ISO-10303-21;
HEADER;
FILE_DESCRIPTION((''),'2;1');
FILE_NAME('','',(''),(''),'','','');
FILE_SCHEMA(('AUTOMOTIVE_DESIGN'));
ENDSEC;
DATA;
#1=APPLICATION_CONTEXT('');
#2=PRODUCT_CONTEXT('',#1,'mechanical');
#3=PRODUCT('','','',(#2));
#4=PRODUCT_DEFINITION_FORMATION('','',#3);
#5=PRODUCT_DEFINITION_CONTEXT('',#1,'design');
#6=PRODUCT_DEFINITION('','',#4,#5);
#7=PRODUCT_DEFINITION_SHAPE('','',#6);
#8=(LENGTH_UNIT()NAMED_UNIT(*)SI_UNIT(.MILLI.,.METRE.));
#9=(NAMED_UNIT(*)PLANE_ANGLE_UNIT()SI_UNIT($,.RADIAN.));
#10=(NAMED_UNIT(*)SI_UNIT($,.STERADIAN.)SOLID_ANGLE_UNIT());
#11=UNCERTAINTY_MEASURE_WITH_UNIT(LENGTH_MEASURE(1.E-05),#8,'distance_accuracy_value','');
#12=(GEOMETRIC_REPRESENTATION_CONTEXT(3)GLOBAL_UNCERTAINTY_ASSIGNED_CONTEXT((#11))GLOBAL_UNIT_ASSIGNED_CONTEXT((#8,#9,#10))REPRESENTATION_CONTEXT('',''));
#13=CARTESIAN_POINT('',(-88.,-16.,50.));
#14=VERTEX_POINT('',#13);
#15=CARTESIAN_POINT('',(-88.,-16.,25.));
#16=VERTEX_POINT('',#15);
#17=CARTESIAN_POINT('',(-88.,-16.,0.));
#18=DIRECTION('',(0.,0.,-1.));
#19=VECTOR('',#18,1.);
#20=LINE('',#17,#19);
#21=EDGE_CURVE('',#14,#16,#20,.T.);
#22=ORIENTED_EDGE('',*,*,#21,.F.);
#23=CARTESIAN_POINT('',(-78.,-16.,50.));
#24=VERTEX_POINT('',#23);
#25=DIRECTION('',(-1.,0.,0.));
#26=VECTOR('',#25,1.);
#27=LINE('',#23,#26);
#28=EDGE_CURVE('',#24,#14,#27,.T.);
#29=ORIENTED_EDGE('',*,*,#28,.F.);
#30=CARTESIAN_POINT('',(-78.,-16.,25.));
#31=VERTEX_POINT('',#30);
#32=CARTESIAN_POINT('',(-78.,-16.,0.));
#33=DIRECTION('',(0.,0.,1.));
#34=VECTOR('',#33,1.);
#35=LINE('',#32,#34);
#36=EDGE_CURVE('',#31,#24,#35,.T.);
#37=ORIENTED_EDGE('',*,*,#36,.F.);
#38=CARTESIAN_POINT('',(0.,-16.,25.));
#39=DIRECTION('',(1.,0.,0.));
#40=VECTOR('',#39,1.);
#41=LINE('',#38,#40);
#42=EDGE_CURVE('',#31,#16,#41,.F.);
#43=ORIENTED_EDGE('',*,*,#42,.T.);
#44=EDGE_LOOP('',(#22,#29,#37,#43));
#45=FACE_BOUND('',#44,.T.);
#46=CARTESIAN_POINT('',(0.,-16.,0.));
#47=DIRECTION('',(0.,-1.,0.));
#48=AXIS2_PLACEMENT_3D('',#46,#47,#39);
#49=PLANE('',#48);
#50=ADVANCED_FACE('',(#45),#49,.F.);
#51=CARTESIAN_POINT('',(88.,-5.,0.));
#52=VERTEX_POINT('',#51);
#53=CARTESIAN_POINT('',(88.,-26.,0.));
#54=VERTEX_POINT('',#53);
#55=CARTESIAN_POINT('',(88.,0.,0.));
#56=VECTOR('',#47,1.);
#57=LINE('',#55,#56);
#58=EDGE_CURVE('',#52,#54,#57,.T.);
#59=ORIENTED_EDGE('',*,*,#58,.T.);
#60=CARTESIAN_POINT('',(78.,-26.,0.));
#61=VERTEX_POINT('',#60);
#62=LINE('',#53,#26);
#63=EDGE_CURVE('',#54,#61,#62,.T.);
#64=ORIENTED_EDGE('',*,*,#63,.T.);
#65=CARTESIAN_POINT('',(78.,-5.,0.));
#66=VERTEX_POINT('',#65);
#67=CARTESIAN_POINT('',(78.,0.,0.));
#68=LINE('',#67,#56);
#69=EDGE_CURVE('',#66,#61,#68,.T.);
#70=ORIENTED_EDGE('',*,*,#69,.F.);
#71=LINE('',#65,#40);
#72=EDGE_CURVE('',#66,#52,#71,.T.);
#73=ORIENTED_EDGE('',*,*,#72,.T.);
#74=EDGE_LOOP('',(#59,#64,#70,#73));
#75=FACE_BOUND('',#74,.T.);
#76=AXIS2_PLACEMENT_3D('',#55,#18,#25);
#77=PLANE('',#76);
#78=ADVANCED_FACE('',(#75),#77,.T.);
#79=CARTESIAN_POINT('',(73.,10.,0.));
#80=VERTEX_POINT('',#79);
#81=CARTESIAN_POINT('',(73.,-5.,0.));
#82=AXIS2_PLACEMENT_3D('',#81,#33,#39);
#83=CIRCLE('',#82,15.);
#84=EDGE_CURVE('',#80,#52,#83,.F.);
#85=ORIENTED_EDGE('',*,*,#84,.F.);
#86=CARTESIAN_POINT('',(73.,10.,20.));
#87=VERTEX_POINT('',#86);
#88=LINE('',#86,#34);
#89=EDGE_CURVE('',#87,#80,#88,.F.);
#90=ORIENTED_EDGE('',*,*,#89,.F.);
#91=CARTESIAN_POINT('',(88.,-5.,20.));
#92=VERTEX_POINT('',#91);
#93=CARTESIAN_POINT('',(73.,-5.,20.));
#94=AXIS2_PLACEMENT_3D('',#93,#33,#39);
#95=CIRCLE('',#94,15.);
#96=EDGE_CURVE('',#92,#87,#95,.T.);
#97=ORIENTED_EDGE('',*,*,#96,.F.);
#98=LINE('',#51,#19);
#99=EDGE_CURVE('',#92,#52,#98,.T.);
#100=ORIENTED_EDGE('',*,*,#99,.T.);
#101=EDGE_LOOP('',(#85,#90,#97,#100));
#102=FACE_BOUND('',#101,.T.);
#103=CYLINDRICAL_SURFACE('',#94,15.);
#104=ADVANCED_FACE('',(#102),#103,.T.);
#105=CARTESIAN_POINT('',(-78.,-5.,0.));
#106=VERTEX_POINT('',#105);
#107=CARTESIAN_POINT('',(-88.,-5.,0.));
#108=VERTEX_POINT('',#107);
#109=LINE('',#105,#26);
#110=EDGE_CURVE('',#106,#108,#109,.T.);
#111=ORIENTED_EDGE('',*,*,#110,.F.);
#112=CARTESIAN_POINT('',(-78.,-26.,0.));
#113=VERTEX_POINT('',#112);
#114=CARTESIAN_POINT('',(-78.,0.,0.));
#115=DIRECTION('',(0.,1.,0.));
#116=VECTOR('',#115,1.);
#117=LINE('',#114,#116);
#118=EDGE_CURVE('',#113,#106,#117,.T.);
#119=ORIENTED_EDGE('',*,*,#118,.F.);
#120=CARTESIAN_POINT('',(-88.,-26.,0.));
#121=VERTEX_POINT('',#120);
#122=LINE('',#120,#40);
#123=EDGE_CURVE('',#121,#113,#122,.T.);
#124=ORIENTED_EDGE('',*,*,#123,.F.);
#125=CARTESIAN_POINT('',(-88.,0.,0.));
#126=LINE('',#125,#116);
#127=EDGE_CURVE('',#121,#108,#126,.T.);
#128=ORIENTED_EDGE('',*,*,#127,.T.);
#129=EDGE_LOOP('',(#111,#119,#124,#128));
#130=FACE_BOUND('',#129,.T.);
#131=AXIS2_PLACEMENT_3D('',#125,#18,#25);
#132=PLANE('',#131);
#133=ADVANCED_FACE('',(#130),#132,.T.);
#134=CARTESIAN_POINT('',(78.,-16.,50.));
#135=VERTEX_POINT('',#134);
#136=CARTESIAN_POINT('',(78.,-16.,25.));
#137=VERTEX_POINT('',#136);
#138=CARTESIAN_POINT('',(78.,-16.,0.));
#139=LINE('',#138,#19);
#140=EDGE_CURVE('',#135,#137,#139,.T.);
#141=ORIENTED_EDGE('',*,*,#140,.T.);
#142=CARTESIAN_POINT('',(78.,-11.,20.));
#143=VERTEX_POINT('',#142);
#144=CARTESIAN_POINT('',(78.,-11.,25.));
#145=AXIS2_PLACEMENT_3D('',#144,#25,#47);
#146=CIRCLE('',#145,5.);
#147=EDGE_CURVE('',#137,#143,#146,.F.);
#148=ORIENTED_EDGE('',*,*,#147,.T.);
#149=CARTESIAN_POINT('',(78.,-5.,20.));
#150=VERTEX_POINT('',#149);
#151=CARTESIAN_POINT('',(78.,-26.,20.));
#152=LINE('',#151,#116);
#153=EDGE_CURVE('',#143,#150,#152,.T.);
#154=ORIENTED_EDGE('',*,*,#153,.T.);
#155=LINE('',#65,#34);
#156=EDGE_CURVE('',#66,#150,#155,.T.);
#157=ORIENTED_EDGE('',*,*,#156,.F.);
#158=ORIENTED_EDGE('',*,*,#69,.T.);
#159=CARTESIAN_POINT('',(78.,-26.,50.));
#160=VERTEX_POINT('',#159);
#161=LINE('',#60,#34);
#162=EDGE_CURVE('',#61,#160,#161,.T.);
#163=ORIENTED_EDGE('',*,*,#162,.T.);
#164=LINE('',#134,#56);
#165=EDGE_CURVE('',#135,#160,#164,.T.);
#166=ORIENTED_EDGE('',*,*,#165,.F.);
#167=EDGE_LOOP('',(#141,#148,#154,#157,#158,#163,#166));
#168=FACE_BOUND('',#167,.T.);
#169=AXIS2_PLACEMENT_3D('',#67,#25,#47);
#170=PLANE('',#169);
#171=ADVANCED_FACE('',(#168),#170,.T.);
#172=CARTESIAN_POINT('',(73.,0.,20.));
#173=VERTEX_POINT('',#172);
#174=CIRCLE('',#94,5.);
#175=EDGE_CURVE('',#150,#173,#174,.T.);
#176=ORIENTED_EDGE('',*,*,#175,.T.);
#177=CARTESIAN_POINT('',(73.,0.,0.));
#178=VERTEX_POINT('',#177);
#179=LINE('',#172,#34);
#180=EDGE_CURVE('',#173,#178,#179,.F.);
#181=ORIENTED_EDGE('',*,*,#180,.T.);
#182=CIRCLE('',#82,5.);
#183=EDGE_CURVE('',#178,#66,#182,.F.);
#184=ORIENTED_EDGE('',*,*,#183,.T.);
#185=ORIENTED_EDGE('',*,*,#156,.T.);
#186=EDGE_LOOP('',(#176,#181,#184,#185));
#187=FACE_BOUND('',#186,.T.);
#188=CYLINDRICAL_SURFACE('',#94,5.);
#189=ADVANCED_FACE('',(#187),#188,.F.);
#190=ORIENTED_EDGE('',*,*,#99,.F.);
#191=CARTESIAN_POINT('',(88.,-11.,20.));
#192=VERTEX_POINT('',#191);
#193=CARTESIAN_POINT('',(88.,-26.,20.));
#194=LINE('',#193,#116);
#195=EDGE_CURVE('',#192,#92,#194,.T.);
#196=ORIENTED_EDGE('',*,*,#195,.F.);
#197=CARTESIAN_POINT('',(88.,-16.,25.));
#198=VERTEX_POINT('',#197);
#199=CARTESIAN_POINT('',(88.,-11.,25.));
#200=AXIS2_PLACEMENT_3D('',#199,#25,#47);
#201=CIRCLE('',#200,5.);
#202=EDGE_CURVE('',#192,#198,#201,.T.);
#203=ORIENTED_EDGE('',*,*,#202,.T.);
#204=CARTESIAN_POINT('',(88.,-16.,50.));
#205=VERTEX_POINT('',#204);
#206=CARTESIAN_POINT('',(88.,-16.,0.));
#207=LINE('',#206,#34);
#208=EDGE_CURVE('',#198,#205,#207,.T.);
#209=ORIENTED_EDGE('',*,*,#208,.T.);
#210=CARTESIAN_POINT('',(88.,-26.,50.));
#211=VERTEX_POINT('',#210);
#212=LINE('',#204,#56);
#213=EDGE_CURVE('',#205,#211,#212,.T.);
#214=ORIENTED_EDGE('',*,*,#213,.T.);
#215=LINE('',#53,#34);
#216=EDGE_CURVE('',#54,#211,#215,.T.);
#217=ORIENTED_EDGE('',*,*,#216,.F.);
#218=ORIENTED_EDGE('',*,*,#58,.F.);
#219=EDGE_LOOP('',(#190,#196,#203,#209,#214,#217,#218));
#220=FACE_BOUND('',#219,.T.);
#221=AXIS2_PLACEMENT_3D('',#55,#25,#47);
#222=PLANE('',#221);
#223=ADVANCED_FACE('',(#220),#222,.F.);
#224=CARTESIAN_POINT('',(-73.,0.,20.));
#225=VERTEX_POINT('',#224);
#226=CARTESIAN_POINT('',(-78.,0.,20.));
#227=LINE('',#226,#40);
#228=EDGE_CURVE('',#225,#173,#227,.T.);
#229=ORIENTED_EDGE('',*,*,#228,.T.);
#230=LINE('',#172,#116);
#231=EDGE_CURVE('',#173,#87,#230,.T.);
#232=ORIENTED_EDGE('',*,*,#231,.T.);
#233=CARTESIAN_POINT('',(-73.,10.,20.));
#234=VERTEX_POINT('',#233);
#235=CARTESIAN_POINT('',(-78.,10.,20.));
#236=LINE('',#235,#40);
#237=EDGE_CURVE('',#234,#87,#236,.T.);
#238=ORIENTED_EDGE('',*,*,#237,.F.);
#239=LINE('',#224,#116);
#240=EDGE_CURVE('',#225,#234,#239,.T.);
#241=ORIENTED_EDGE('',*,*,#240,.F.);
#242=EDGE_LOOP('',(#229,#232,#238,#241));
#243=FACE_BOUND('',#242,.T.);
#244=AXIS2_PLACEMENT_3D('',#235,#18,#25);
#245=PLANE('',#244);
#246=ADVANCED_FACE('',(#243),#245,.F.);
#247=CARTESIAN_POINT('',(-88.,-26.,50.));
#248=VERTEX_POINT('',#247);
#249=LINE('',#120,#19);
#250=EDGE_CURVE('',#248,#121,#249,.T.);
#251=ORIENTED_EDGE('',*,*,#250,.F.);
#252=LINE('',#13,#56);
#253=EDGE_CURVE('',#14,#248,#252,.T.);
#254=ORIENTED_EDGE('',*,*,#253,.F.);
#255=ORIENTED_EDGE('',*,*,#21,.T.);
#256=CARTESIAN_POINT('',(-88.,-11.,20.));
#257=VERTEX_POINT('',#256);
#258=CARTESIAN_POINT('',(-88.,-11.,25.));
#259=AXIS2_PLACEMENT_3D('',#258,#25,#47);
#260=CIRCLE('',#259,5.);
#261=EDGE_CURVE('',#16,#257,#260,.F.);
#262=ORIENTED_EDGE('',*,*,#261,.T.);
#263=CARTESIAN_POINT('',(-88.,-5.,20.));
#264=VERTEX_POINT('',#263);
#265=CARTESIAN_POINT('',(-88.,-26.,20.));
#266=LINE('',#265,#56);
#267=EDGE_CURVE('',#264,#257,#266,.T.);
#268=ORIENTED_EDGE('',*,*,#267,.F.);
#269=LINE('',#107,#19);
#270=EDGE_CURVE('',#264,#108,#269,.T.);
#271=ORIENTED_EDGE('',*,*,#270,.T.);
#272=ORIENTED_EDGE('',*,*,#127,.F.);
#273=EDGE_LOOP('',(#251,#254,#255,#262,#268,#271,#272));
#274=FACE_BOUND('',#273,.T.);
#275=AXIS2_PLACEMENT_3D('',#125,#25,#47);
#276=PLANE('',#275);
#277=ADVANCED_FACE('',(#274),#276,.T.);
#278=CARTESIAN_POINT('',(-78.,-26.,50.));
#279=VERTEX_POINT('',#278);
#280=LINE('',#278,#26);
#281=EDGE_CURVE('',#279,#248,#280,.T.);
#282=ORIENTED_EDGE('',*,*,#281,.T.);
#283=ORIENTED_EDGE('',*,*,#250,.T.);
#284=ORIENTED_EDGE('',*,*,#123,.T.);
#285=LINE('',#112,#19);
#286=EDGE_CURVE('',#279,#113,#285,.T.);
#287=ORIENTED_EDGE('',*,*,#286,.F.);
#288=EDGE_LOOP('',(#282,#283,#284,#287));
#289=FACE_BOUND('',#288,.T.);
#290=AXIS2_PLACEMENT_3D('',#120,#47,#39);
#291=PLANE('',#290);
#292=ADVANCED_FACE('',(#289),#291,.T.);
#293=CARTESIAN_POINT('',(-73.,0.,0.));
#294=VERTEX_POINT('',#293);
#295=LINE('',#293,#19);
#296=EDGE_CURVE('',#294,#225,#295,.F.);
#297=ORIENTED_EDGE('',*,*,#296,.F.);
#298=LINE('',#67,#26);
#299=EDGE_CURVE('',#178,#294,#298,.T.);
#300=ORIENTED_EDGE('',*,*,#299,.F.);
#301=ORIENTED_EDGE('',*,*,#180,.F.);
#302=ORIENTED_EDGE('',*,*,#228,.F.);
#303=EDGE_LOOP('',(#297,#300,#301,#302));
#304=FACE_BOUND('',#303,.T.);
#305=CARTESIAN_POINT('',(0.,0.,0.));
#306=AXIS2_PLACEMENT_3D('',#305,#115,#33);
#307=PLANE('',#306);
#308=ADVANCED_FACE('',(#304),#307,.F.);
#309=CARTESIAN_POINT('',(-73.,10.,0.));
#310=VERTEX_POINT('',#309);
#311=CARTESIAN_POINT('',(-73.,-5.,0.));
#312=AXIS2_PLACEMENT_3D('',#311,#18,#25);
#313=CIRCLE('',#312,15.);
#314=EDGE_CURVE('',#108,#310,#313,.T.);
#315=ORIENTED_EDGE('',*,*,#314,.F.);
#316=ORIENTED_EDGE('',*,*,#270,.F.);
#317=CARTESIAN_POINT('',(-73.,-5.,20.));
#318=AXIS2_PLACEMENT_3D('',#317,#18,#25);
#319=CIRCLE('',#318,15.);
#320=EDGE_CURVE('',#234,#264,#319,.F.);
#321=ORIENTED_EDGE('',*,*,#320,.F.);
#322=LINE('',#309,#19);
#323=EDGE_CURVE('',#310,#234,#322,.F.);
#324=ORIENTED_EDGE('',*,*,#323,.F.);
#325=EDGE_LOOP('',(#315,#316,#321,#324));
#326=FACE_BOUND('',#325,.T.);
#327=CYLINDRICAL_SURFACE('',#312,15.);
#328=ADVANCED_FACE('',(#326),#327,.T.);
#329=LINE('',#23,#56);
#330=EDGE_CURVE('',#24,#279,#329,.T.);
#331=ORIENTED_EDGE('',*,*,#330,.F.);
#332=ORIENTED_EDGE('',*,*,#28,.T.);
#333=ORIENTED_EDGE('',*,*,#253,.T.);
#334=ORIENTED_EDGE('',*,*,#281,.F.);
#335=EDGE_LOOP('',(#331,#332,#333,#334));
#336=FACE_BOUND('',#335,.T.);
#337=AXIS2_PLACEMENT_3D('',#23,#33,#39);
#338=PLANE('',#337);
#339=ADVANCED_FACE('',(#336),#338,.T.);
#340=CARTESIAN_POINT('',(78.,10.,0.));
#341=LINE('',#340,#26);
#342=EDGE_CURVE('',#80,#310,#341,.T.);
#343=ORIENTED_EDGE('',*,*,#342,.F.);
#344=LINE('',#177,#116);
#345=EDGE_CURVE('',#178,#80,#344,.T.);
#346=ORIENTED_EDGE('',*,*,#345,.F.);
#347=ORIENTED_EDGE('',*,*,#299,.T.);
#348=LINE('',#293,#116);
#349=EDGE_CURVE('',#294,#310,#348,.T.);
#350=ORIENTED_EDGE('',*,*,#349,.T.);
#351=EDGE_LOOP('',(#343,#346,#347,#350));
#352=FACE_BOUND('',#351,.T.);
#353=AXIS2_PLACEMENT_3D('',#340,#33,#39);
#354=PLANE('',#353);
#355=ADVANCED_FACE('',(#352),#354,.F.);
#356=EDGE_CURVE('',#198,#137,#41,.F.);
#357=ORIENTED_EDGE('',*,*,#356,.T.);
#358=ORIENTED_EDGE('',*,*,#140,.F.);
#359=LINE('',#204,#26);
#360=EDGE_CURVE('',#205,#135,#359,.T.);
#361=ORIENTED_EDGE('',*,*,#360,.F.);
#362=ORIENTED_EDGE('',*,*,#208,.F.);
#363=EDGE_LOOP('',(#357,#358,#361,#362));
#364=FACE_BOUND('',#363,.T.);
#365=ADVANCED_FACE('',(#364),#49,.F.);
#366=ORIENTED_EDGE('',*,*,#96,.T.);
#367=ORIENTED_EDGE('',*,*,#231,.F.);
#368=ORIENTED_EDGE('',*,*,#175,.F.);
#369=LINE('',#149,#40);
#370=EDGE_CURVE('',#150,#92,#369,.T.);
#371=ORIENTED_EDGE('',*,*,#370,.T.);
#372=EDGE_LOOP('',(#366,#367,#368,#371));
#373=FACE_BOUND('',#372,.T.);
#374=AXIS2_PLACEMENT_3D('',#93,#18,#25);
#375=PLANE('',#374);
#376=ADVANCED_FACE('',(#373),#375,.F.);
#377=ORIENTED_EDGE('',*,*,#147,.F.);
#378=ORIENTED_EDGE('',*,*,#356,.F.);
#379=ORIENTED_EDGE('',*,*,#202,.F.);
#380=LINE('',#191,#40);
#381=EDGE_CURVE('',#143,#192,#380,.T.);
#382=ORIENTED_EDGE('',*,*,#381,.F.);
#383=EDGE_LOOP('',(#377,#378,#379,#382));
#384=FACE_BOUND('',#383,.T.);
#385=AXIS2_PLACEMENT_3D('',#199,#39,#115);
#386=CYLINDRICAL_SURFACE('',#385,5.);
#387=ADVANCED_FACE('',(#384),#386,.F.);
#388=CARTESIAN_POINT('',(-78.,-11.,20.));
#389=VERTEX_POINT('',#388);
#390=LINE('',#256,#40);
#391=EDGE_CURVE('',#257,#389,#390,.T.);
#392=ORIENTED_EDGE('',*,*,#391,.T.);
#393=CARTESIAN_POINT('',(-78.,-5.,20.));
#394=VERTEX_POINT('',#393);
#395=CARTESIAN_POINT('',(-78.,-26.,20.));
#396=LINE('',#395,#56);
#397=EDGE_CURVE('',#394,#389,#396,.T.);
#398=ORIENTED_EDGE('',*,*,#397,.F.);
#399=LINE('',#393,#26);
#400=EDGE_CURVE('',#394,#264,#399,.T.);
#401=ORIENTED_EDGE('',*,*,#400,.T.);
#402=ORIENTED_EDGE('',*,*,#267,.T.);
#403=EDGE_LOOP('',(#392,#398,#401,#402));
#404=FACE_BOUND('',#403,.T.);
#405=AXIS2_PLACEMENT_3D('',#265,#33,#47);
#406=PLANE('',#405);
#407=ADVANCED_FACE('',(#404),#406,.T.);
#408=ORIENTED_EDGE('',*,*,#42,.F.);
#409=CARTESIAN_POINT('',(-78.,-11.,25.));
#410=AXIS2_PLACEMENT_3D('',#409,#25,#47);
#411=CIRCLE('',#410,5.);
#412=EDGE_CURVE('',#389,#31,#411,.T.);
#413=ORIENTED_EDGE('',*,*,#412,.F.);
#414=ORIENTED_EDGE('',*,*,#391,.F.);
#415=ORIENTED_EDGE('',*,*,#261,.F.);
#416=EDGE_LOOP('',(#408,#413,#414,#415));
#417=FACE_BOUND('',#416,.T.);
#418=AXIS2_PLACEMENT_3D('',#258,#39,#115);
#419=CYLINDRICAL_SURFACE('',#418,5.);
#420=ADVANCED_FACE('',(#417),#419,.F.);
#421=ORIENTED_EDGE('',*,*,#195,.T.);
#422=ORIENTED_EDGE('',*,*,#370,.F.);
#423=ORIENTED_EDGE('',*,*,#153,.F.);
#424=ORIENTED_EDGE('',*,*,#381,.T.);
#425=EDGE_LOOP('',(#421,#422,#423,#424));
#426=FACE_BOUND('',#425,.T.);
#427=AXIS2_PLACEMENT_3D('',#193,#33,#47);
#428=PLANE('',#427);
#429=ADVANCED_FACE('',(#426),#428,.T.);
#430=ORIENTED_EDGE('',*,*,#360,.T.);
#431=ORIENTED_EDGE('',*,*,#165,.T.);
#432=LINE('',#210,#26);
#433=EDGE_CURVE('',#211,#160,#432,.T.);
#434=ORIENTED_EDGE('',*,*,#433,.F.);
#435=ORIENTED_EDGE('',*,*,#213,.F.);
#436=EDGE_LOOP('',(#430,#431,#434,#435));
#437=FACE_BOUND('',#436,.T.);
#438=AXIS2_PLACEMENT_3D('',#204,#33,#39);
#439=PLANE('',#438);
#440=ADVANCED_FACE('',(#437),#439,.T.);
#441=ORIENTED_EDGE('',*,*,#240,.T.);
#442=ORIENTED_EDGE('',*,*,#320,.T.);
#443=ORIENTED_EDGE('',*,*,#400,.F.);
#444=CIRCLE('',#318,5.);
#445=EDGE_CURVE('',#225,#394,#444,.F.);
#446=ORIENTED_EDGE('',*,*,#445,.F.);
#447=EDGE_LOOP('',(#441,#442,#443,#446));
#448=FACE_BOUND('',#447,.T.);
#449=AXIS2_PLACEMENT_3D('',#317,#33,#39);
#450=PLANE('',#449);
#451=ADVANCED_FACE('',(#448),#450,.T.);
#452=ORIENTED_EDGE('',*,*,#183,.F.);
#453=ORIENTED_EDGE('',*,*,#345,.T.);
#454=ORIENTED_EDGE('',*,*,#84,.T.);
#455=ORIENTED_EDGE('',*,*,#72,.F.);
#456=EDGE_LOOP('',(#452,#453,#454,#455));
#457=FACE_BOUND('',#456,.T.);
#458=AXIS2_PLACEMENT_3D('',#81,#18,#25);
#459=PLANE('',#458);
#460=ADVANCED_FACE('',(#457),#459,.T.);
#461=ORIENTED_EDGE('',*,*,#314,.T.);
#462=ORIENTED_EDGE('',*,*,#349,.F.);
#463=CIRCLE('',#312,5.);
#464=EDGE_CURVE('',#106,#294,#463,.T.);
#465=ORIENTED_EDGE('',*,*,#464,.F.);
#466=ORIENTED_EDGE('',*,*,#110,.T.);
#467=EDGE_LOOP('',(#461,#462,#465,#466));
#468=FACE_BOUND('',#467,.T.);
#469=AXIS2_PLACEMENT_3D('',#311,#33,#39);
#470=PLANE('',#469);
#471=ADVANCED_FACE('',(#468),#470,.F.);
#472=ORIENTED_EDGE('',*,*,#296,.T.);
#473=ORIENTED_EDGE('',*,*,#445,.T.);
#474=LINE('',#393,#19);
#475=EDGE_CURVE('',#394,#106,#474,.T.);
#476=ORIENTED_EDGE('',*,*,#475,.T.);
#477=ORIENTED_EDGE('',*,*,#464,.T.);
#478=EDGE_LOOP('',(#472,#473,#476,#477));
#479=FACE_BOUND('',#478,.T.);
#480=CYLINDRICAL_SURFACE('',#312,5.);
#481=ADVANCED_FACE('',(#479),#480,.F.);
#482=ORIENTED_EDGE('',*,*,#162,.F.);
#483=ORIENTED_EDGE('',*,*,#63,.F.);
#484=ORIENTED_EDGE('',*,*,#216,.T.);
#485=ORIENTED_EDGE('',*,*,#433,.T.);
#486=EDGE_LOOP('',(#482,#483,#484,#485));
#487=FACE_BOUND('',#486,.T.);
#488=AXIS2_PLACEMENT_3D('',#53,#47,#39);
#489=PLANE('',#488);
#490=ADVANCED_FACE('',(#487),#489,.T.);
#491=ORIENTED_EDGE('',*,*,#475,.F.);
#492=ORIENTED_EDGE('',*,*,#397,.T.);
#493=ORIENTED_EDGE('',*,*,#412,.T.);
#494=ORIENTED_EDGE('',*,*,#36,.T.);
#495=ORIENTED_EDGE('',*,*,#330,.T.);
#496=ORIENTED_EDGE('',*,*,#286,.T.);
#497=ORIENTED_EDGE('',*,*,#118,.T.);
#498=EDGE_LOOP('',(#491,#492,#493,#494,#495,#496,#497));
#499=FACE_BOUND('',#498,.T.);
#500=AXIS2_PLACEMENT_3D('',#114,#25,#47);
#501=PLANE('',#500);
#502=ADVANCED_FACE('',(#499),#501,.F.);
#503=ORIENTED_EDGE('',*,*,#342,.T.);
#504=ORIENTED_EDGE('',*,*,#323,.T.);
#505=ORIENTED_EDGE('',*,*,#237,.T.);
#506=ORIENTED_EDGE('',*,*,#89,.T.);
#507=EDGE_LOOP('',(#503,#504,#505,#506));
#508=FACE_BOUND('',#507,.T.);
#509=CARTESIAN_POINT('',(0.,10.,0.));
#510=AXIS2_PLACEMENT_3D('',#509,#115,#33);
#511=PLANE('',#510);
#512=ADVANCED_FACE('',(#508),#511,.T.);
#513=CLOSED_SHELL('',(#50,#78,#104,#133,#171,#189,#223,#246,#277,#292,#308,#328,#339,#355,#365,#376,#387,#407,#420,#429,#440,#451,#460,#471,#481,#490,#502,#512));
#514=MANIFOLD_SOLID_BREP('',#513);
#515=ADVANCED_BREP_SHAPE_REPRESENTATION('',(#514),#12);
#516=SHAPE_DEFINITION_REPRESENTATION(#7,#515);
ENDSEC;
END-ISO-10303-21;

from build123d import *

# Parameters (mm, degrees)
SKETCH2_W                      = 156
SKETCH2_H                      = 20
BASE_FLANGE1_DEPTH             = 10
EDGE_FLANGE1_STRIP_W           = 50
EDGE_FLANGE1_STRIP_H           = 10
EDGE_FLANGE1_STRIP_CUT_DEPTH   = 20
EDGE_FLANGE1_STRIP_2_W         = 50
EDGE_FLANGE1_STRIP_2_H         = 10
EDGE_FLANGE1_STRIP_CUT_2_DEPTH = 20
EDGE_FLANGE1_DEPTH             = 20
EDGE_FLANGE1_BEND_DEPTH        = 20
SKETCH15_W                     = 10
SKETCH15_H                     = 50
BOSS_EXTRUDE1_DEPTH            = 10
FILLET3_R                      = 5


# Sheet-metal steps are written as plain solids
with BuildPart() as part:
    # Sketch2 → Base-Flange1 (new body)
    with BuildSketch(Plane(origin=(0, 0, 0), x_dir=(1, 0, 0), z_dir=(0, 1, 0))):
        with Locations((0, -10)):
            Rectangle(SKETCH2_W, SKETCH2_H)
    extrude(amount=BASE_FLANGE1_DEPTH)

    # Edge-Flange1 strip (across the edge) → Edge-Flange1 strip cut (cut)
    with BuildSketch(Plane(origin=(-78, 0, 20), x_dir=(1, 0, 0), z_dir=(0, 0, -1))):
        with Locations((-20, -5)):
            Rectangle(EDGE_FLANGE1_STRIP_W, EDGE_FLANGE1_STRIP_H)
    extrude(amount=EDGE_FLANGE1_STRIP_CUT_DEPTH, mode=Mode.SUBTRACT)

    # Edge-Flange1 strip 2 (across the edge) → Edge-Flange1 strip cut 2 (cut)
    with BuildSketch(Plane(origin=(78, 0, 0), x_dir=(-1, 0, 0), z_dir=(0, 0, 1))):
        with Locations((-20, -5)):
            Rectangle(EDGE_FLANGE1_STRIP_2_W, EDGE_FLANGE1_STRIP_2_H)
    extrude(amount=EDGE_FLANGE1_STRIP_CUT_2_DEPTH, mode=Mode.SUBTRACT)

    # Edge-Flange1 section (across the edge) → Edge-Flange1 (add)
    with BuildSketch(Plane(origin=(-78, 0, 20), x_dir=(1, 0, 0), z_dir=(0, 0, -1))):
        with BuildLine():
            Line((-10, 5), (-10, 26))
            Line((-10, 26), (0, 26))
            Line((0, 26), (0, 5))
            ThreePointArc((0, 5), (1.464466094, 1.464466094), (5, 0))
            Line((5, 0), (5, -10))
            ThreePointArc((5, -10), (-5.606601718, -5.606601718), (-10, 5))
        make_face()
    extrude(amount=EDGE_FLANGE1_DEPTH)

    # Edge-Flange1 section 2 (across the edge) → Edge-Flange1 bend (add)
    with BuildSketch(Plane(origin=(78, 0, 0), x_dir=(-1, 0, 0), z_dir=(0, 0, 1))):
        with BuildLine():
            Line((-10, 5), (-10, 26))
            Line((-10, 26), (0, 26))
            Line((0, 26), (0, 5))
            ThreePointArc((0, 5), (1.464466094, 1.464466094), (5, 0))
            Line((5, 0), (5, -10))
            ThreePointArc((5, -10), (-5.606601718, -5.606601718), (-10, 5))
        make_face()
    extrude(amount=EDGE_FLANGE1_BEND_DEPTH)

    # Sketch15 → Boss-Extrude1 (add)
    with BuildSketch(Plane.XZ.offset(26)):
        with Locations((-83, 25)):
            Rectangle(SKETCH15_W, SKETCH15_H)
        with Locations((83, 25)):
            Rectangle(SKETCH15_W, SKETCH15_H)
    extrude(amount=-BOSS_EXTRUDE1_DEPTH)

    # Fillet3
    fillet3_edges = [part.edges().sort_by_distance(p)[0] for p in [
        (83, -16, 20),
        (-83, -16, 20),
    ]]
    fillet(fillet3_edges, radius=FILLET3_R)


solid = part.part
